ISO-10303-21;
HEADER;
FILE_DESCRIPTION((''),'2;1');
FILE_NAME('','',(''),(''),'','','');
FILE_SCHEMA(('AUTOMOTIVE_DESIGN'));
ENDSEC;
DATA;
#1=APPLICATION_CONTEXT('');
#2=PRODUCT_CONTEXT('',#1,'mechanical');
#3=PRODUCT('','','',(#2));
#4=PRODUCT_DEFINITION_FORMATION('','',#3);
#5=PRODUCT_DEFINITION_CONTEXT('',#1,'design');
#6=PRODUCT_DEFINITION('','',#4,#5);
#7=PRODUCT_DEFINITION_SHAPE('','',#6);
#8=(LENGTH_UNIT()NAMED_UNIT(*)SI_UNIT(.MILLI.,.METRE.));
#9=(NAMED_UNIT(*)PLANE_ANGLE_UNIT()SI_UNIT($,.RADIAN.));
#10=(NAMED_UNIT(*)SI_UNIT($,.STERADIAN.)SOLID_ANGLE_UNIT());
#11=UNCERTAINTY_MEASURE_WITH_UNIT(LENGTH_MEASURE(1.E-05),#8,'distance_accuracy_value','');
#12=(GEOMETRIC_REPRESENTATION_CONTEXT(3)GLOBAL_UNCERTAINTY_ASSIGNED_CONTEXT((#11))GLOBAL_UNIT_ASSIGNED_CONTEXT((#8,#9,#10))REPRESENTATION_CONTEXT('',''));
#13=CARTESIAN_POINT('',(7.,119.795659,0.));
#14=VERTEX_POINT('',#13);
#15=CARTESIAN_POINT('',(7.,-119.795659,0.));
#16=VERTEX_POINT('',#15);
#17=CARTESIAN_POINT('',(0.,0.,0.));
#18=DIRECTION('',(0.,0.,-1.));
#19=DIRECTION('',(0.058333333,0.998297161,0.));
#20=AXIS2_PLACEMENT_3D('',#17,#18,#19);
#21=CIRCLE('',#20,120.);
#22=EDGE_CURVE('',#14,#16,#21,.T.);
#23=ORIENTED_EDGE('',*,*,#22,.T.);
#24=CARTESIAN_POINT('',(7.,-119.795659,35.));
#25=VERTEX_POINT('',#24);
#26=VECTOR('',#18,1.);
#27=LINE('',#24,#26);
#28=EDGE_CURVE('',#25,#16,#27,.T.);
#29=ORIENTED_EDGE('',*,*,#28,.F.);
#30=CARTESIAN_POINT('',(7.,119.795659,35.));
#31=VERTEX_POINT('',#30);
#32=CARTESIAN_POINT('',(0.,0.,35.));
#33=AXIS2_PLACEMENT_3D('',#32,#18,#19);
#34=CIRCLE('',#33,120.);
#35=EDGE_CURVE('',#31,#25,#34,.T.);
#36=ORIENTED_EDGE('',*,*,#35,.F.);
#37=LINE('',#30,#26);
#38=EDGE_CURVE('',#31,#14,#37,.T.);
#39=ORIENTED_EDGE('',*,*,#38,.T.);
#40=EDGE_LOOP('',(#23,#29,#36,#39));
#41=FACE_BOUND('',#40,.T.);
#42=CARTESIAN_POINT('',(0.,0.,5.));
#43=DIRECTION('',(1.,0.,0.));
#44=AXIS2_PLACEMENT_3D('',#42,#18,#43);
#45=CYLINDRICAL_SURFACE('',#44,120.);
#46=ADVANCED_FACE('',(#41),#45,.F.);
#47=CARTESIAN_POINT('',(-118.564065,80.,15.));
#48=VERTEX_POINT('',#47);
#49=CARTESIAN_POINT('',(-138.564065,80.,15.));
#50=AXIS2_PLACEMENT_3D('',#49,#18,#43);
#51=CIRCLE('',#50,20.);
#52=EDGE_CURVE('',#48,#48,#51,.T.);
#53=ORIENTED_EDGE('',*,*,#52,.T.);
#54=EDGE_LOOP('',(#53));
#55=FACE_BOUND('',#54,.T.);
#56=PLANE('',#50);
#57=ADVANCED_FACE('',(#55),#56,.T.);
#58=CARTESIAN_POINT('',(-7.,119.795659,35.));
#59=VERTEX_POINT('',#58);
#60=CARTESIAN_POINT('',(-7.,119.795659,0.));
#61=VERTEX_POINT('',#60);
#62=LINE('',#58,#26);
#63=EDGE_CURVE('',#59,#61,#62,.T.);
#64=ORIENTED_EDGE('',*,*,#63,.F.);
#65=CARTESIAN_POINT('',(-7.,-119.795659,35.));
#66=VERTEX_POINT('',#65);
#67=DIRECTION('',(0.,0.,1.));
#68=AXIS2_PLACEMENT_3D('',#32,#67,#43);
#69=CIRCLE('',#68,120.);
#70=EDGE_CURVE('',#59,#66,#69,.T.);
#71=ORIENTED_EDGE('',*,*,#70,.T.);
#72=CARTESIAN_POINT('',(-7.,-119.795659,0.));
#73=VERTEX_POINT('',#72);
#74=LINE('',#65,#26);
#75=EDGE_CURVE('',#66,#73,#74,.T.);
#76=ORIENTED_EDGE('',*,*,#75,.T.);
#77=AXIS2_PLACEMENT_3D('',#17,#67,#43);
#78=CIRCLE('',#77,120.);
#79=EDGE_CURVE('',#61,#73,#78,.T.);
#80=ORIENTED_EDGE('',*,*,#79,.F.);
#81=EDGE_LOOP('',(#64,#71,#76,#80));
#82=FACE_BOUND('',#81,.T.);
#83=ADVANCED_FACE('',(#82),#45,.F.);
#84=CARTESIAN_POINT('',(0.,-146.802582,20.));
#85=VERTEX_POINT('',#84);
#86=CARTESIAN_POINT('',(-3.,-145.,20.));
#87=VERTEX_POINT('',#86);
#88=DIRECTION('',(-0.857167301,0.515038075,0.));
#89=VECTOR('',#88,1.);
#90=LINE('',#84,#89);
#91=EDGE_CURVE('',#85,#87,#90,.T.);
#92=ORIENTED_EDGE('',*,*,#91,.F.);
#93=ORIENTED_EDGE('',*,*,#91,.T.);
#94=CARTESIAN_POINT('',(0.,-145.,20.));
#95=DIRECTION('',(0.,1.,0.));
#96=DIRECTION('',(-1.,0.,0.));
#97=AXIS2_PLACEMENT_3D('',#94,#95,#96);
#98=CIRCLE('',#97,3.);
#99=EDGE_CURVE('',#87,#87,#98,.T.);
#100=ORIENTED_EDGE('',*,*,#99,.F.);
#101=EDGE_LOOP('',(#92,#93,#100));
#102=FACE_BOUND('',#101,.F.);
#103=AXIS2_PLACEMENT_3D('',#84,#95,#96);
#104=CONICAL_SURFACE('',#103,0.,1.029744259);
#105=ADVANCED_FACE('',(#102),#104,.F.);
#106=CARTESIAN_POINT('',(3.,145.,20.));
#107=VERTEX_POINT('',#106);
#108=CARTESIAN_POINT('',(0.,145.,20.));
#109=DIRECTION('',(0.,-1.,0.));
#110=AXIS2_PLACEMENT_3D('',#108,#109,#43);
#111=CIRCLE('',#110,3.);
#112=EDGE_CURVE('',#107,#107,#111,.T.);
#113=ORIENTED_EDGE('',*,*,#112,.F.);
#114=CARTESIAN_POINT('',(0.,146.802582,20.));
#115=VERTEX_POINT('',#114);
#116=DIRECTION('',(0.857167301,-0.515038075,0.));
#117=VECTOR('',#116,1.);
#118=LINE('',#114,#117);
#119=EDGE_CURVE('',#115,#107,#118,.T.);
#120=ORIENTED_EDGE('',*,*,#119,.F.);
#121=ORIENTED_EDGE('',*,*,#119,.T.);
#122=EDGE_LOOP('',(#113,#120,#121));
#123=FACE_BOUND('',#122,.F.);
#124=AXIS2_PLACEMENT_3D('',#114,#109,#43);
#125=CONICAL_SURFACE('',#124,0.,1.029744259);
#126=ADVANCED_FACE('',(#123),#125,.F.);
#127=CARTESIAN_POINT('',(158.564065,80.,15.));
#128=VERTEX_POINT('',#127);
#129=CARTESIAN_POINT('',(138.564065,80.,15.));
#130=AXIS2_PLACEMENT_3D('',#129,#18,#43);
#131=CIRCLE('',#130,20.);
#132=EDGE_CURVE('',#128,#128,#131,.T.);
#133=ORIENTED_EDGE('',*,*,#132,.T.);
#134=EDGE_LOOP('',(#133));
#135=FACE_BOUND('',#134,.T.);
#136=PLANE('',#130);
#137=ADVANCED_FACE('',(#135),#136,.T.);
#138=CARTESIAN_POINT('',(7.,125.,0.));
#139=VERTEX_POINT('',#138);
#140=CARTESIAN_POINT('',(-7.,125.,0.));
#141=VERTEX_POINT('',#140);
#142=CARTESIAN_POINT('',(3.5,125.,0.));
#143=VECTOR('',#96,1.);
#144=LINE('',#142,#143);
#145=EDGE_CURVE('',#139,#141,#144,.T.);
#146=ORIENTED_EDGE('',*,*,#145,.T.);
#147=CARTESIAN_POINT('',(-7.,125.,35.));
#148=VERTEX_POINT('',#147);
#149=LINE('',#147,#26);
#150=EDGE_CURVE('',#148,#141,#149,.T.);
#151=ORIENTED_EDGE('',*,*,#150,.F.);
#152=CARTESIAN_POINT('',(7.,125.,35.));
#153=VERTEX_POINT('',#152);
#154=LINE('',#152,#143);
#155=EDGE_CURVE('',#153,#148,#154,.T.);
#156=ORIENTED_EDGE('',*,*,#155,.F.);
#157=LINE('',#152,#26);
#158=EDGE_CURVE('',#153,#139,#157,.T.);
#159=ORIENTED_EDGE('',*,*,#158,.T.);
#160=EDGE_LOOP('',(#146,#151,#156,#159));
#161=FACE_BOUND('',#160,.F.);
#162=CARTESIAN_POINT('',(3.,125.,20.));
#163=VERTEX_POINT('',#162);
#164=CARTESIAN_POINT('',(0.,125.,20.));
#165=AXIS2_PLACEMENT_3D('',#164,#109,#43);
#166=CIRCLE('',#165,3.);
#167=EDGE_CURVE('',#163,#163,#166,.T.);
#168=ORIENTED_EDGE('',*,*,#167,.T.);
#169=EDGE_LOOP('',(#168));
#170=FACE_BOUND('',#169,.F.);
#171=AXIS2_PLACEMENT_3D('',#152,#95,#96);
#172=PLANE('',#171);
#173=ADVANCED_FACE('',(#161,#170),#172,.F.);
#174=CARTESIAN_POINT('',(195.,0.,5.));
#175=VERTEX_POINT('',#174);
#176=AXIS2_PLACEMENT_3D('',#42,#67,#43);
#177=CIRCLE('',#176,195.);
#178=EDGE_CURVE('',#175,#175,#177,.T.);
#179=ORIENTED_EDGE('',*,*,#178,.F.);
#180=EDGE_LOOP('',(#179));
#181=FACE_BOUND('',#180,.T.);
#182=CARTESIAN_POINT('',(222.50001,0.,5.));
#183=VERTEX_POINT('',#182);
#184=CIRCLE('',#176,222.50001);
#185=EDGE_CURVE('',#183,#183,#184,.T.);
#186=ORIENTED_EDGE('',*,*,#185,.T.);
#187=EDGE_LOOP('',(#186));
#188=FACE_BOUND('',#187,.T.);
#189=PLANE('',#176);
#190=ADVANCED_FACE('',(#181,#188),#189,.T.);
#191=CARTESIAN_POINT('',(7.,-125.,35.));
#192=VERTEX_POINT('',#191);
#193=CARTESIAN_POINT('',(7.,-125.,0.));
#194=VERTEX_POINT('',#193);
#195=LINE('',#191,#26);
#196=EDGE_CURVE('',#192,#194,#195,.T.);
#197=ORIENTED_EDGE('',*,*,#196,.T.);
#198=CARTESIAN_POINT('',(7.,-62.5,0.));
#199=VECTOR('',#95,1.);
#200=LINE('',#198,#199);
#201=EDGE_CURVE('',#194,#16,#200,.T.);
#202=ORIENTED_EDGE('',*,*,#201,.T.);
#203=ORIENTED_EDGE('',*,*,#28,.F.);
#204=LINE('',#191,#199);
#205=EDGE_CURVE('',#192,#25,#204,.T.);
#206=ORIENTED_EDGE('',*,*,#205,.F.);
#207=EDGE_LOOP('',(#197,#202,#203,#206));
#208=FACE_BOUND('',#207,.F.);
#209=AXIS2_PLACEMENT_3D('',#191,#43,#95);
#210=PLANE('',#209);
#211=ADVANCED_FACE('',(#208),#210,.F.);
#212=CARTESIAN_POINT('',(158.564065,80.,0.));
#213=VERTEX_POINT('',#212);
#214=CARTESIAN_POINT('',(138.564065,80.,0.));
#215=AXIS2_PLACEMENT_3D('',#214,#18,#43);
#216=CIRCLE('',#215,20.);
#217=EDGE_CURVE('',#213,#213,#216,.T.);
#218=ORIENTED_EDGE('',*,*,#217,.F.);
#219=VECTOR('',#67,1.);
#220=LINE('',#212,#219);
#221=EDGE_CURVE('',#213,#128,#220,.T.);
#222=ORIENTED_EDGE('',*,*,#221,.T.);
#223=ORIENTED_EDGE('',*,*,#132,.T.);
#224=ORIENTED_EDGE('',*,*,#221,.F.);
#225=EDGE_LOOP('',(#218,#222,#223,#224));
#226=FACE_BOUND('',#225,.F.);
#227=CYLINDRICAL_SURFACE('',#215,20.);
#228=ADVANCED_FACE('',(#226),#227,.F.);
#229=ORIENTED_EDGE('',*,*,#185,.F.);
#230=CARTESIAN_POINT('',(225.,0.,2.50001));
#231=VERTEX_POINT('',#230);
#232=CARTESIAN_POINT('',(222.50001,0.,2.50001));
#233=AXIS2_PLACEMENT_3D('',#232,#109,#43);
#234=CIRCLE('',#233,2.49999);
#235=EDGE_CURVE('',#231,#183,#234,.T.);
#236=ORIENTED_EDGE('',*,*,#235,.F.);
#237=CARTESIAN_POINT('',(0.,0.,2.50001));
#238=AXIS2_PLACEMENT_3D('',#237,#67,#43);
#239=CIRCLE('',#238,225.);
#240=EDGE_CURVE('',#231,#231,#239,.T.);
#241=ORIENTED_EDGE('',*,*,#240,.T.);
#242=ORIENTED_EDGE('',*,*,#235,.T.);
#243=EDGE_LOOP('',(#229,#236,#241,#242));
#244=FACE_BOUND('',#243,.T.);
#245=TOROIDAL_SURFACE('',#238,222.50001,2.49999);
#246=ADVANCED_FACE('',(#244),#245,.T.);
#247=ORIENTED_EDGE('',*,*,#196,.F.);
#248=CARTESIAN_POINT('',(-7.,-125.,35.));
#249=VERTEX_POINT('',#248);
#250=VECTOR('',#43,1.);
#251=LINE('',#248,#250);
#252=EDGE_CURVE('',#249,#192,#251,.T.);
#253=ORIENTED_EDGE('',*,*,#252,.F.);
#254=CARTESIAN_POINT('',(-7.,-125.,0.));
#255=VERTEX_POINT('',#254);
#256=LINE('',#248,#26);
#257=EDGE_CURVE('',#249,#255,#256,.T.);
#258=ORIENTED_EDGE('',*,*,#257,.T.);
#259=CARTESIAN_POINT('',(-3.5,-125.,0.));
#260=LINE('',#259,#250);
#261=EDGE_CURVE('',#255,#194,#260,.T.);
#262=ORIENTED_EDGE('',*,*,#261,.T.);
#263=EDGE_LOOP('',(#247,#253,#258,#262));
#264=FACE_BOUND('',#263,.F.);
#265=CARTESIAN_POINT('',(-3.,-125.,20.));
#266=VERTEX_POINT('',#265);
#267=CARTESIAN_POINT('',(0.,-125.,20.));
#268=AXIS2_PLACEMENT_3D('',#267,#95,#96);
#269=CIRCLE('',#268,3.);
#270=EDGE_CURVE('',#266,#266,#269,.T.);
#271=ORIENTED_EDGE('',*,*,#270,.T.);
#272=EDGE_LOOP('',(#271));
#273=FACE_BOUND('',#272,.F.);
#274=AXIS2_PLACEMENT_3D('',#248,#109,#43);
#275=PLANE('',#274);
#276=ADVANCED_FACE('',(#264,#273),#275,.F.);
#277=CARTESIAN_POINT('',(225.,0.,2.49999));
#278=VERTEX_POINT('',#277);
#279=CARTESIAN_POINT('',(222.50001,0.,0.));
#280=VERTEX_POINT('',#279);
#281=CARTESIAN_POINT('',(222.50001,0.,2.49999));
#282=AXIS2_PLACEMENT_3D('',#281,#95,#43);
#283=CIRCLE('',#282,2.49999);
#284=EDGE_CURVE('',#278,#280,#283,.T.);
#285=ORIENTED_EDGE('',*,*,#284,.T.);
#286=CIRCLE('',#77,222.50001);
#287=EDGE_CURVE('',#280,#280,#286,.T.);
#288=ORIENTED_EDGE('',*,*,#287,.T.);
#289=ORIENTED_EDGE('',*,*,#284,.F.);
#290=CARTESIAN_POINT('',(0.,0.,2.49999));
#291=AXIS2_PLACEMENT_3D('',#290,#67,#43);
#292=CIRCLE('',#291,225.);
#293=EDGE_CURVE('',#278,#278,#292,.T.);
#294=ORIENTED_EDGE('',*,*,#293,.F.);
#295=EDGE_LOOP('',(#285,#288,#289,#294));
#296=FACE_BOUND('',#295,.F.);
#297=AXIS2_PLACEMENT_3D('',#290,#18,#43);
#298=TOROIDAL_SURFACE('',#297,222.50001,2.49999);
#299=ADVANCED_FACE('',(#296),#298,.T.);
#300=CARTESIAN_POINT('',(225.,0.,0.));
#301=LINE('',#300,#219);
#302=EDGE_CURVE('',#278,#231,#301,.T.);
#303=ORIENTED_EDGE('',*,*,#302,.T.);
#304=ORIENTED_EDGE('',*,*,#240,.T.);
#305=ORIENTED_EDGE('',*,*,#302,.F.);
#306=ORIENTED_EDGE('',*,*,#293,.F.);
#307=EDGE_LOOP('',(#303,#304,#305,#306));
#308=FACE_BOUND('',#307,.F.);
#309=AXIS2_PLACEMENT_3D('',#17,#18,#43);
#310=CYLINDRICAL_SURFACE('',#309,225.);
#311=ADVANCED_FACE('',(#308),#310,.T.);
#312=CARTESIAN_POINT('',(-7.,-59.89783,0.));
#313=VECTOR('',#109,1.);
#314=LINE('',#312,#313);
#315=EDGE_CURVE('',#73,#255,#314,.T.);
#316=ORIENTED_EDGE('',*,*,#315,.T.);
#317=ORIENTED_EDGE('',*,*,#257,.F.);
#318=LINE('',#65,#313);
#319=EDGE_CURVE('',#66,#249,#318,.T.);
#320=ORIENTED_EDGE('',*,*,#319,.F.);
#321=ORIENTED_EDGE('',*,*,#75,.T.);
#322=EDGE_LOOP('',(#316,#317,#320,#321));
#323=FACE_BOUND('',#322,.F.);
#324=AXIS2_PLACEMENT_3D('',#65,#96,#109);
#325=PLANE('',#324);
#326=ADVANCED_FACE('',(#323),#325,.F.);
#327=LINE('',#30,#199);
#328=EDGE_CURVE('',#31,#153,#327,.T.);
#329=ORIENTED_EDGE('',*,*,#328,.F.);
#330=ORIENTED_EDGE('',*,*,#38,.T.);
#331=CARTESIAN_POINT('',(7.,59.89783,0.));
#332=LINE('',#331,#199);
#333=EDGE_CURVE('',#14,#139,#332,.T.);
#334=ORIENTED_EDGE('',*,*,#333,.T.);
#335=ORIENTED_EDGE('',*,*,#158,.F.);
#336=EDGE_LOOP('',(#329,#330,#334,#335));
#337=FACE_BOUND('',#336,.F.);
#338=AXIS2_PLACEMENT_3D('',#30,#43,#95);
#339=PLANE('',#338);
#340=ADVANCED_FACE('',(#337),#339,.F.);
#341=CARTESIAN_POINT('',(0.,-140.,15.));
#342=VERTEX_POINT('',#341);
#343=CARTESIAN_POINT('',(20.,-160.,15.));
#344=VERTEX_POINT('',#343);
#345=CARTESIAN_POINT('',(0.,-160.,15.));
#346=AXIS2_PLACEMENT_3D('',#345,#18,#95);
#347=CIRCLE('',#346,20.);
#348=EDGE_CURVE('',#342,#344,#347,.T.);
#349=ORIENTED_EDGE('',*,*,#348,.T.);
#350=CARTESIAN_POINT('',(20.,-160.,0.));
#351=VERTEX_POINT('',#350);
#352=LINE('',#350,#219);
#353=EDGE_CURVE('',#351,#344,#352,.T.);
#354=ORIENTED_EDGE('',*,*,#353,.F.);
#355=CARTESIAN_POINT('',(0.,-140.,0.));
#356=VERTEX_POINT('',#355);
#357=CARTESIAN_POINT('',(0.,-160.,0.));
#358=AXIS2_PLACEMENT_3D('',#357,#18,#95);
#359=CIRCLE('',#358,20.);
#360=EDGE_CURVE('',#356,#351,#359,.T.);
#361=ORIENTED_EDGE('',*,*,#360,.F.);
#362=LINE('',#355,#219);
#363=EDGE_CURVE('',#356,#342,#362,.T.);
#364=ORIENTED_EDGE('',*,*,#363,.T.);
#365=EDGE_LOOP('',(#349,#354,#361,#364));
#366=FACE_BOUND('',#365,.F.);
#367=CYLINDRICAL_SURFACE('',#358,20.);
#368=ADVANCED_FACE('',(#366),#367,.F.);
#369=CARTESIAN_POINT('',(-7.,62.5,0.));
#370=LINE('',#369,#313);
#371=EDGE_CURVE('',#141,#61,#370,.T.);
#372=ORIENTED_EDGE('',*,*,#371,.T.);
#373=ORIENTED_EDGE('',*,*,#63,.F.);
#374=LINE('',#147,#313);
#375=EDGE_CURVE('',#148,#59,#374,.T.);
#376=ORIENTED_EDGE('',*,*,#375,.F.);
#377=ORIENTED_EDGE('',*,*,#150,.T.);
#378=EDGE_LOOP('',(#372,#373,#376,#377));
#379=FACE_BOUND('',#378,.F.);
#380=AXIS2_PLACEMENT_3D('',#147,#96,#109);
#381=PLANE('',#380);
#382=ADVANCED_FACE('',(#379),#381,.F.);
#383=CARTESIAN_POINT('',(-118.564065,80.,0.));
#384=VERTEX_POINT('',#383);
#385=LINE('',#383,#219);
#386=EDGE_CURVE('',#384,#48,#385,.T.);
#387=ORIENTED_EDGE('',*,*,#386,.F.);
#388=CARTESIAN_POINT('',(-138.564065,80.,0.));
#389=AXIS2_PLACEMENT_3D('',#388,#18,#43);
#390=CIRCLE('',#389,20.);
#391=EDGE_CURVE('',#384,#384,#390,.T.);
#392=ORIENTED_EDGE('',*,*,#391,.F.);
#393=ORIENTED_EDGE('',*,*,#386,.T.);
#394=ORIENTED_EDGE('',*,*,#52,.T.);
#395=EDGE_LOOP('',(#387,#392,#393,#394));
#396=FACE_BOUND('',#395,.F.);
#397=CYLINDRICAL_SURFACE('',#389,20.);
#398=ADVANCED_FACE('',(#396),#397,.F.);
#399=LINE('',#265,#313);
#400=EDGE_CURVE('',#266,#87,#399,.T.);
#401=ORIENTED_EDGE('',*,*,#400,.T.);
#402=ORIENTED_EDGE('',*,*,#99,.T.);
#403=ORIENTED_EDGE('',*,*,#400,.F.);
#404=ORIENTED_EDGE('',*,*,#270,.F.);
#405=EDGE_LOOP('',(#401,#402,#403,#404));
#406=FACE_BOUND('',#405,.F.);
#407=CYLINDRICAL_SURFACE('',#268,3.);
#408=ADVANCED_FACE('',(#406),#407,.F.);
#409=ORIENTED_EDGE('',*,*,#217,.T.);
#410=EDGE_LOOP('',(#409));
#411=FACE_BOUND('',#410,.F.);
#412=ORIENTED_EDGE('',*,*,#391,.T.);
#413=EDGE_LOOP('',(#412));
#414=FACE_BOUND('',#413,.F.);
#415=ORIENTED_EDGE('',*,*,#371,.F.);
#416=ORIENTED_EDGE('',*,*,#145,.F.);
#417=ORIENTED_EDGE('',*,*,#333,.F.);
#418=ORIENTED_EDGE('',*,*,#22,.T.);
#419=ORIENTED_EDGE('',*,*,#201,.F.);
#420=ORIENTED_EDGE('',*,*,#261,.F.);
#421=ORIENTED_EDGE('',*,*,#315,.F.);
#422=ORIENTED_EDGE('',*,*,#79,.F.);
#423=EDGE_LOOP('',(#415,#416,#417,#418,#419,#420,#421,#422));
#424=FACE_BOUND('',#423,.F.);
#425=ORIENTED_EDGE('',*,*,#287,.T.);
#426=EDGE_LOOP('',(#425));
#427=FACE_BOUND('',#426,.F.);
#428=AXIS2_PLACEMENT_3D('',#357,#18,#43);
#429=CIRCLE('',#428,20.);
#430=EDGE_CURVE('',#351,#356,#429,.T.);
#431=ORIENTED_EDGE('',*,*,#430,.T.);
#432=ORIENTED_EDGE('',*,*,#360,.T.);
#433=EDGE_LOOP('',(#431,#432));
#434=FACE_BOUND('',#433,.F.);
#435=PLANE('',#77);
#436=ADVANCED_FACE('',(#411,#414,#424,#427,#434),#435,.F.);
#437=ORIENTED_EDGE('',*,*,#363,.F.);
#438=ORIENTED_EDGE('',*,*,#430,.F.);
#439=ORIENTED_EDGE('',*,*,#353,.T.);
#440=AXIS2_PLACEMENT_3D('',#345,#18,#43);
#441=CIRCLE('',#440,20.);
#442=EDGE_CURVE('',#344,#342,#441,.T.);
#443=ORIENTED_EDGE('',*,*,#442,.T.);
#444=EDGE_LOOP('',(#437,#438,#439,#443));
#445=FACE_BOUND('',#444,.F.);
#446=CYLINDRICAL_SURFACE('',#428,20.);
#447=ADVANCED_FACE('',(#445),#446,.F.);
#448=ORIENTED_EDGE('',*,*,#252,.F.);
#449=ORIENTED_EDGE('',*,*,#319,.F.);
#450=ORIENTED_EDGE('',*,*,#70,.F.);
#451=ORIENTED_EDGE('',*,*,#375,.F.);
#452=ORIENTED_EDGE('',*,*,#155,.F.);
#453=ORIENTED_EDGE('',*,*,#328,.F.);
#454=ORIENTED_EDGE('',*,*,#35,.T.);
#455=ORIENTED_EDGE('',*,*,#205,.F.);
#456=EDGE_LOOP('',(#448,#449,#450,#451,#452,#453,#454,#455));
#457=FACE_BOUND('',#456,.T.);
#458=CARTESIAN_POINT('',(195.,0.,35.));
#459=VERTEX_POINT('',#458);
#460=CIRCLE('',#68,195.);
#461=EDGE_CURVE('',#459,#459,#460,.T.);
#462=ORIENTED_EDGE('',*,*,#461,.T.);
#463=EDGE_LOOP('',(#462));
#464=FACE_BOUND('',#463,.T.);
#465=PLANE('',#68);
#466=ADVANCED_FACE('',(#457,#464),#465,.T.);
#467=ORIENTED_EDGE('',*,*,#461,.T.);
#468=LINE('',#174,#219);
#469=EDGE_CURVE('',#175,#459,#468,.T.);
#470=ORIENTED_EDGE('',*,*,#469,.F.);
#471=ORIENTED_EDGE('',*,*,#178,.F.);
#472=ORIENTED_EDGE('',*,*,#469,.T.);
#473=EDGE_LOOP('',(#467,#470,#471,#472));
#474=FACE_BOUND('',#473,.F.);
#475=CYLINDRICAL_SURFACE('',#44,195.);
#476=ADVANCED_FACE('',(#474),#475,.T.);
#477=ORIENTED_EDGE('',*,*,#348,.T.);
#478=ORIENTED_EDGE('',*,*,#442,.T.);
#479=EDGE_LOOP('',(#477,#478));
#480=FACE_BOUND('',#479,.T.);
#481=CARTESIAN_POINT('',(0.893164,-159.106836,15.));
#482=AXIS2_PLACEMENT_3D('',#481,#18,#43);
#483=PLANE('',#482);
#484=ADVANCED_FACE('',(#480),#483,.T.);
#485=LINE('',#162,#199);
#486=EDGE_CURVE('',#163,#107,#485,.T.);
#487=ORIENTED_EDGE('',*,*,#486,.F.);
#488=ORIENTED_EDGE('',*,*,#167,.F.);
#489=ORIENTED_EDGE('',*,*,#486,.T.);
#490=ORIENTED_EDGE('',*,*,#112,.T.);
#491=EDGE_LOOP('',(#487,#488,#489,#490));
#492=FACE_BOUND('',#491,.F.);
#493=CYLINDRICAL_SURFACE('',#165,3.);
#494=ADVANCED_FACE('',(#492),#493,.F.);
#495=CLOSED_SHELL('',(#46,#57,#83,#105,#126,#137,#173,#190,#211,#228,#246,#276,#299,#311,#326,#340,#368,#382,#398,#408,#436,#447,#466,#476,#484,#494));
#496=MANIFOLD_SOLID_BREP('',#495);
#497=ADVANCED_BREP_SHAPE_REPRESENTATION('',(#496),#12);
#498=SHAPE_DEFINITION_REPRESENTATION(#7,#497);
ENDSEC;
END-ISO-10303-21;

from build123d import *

# Parameters (mm, degrees)
F0_R      = 225
F0_R_2    = 120
F1_DEPTH  = 5
F2_R      = 2.49999
F3_R      = 195
F3_R_2    = 120
F4_DEPTH  = 30
F5_R      = 20
F6_DEPTH  = 15
F8_DEPTH  = 35.001
F10_D     = 6
F10_DEPTH = 20
F10_TIP   = 1.8025818571
F12_D     = 6
F12_DEPTH = 20
F12_TIP   = 1.8025818571


# Not quite as in the source:
# - a fillet or chamfer is up to 0.001 mm smaller than in the source, because OpenCascade refuses the exact size
# - a feature names something its author has since deleted; it is built from what else it names


with BuildPart() as f1:
    # F0 (on Top) → F1 (new body)
    with BuildSketch(Plane.XY):
        Circle(F0_R)
        Circle(F0_R_2, mode=Mode.SUBTRACT)
    extrude(amount=F1_DEPTH)

    # F2 (radius 2.5 in the source; OpenCascade refuses exactly that, so slightly less here)
    f2_edges = [f1.edges().sort_by_distance(p)[0] for p in [
        (-225, 0, 5),
        (-225, 0, 0),
    ]]
    fillet(f2_edges, radius=F2_R)

    # F3 (on face) → F4 (join)
    with BuildSketch(Plane.XY.offset(5)):
        Circle(F3_R)
        Circle(F3_R_2, mode=Mode.SUBTRACT)
    extrude(amount=F4_DEPTH)

    # F5 (on face) → F6 (cut)
    with BuildSketch(Plane(origin=(0, 0, 0), x_dir=(1, 0, 0), z_dir=(0, 0, -1))):
        with BuildLine():
            ThreePointArc((20, 160), (-14.1421356237, 174.1421356237), (0, 140))
            ThreePointArc((0, 140), (14.1421356237, 145.8578643763), (20, 160))
        make_face()
        with Locations((138.5640646055, -80)):
            Circle(F5_R)
        with Locations((-138.5640646055, -80)):
            Circle(F5_R)
    extrude(amount=-F6_DEPTH, mode=Mode.SUBTRACT)

    # F7 (on face) → F8 (cut, through all)
    with BuildSketch(Plane.XY.offset(35)):
        with BuildLine():
            Line((0, 125), (0, 120))
            ThreePointArc((0, 120), (3.501490936, 119.9489039601), (7, 119.7956593538))
            Line((7, 119.7956593538), (7, 125))
            Line((7, 125), (0, 125))
        make_face()
        with BuildLine():
            ThreePointArc((-7, 119.7956593538), (-3.501490936, 119.9489039601), (0, 120))
            Line((0, 120), (0, 125))
            Line((0, 125), (-7, 125))
            Line((-7, 125), (-7, 119.7956593538))
        make_face()
        with BuildLine():
            Line((7, -125), (7, -119.7956593538))
            ThreePointArc((7, -119.7956593538), (3.501490936, -119.9489039601), (0, -120))
            Line((0, -120), (0, -125))
            Line((0, -125), (7, -125))
        make_face()
        with BuildLine():
            ThreePointArc((0, -120), (-3.501490936, -119.9489039601), (-7, -119.7956593538))
            Line((-7, -119.7956593538), (-7, -125))
            Line((-7, -125), (0, -125))
            Line((0, -125), (0, -120))
        make_face()
    extrude(amount=-F8_DEPTH, mode=Mode.SUBTRACT)

    # F10 (one way)
    with BuildSketch(Plane(origin=(0, -125, 0), x_dir=(-1, 0, 0), z_dir=(0, 1, 0))):
        with Locations((0, 20)):
            Circle(F10_D / 2)
    extrude(amount=-F10_DEPTH, mode=Mode.SUBTRACT)
    with Locations(Plane(origin=(0, -125, 0), x_dir=(-1, 0, 0), z_dir=(0, 1, 0))):
        with Locations((0, 20)):
            with Locations((0, 0, -(F10_DEPTH + F10_TIP / 2))):  # 118° drill point
                Cone(0, F10_D / 2, F10_TIP, mode=Mode.SUBTRACT)

    # F12 (one way)
    with BuildSketch(Plane.XZ.offset(-125)):
        with Locations((0, 20)):
            Circle(F12_D / 2)
    extrude(amount=-F12_DEPTH, mode=Mode.SUBTRACT)
    with Locations(Plane.XZ.offset(-125)):
        with Locations((0, 20)):
            with Locations((0, 0, -(F12_DEPTH + F12_TIP / 2))):  # 118° drill point
                Cone(0, F12_D / 2, F12_TIP, mode=Mode.SUBTRACT)


solid = f1.part
